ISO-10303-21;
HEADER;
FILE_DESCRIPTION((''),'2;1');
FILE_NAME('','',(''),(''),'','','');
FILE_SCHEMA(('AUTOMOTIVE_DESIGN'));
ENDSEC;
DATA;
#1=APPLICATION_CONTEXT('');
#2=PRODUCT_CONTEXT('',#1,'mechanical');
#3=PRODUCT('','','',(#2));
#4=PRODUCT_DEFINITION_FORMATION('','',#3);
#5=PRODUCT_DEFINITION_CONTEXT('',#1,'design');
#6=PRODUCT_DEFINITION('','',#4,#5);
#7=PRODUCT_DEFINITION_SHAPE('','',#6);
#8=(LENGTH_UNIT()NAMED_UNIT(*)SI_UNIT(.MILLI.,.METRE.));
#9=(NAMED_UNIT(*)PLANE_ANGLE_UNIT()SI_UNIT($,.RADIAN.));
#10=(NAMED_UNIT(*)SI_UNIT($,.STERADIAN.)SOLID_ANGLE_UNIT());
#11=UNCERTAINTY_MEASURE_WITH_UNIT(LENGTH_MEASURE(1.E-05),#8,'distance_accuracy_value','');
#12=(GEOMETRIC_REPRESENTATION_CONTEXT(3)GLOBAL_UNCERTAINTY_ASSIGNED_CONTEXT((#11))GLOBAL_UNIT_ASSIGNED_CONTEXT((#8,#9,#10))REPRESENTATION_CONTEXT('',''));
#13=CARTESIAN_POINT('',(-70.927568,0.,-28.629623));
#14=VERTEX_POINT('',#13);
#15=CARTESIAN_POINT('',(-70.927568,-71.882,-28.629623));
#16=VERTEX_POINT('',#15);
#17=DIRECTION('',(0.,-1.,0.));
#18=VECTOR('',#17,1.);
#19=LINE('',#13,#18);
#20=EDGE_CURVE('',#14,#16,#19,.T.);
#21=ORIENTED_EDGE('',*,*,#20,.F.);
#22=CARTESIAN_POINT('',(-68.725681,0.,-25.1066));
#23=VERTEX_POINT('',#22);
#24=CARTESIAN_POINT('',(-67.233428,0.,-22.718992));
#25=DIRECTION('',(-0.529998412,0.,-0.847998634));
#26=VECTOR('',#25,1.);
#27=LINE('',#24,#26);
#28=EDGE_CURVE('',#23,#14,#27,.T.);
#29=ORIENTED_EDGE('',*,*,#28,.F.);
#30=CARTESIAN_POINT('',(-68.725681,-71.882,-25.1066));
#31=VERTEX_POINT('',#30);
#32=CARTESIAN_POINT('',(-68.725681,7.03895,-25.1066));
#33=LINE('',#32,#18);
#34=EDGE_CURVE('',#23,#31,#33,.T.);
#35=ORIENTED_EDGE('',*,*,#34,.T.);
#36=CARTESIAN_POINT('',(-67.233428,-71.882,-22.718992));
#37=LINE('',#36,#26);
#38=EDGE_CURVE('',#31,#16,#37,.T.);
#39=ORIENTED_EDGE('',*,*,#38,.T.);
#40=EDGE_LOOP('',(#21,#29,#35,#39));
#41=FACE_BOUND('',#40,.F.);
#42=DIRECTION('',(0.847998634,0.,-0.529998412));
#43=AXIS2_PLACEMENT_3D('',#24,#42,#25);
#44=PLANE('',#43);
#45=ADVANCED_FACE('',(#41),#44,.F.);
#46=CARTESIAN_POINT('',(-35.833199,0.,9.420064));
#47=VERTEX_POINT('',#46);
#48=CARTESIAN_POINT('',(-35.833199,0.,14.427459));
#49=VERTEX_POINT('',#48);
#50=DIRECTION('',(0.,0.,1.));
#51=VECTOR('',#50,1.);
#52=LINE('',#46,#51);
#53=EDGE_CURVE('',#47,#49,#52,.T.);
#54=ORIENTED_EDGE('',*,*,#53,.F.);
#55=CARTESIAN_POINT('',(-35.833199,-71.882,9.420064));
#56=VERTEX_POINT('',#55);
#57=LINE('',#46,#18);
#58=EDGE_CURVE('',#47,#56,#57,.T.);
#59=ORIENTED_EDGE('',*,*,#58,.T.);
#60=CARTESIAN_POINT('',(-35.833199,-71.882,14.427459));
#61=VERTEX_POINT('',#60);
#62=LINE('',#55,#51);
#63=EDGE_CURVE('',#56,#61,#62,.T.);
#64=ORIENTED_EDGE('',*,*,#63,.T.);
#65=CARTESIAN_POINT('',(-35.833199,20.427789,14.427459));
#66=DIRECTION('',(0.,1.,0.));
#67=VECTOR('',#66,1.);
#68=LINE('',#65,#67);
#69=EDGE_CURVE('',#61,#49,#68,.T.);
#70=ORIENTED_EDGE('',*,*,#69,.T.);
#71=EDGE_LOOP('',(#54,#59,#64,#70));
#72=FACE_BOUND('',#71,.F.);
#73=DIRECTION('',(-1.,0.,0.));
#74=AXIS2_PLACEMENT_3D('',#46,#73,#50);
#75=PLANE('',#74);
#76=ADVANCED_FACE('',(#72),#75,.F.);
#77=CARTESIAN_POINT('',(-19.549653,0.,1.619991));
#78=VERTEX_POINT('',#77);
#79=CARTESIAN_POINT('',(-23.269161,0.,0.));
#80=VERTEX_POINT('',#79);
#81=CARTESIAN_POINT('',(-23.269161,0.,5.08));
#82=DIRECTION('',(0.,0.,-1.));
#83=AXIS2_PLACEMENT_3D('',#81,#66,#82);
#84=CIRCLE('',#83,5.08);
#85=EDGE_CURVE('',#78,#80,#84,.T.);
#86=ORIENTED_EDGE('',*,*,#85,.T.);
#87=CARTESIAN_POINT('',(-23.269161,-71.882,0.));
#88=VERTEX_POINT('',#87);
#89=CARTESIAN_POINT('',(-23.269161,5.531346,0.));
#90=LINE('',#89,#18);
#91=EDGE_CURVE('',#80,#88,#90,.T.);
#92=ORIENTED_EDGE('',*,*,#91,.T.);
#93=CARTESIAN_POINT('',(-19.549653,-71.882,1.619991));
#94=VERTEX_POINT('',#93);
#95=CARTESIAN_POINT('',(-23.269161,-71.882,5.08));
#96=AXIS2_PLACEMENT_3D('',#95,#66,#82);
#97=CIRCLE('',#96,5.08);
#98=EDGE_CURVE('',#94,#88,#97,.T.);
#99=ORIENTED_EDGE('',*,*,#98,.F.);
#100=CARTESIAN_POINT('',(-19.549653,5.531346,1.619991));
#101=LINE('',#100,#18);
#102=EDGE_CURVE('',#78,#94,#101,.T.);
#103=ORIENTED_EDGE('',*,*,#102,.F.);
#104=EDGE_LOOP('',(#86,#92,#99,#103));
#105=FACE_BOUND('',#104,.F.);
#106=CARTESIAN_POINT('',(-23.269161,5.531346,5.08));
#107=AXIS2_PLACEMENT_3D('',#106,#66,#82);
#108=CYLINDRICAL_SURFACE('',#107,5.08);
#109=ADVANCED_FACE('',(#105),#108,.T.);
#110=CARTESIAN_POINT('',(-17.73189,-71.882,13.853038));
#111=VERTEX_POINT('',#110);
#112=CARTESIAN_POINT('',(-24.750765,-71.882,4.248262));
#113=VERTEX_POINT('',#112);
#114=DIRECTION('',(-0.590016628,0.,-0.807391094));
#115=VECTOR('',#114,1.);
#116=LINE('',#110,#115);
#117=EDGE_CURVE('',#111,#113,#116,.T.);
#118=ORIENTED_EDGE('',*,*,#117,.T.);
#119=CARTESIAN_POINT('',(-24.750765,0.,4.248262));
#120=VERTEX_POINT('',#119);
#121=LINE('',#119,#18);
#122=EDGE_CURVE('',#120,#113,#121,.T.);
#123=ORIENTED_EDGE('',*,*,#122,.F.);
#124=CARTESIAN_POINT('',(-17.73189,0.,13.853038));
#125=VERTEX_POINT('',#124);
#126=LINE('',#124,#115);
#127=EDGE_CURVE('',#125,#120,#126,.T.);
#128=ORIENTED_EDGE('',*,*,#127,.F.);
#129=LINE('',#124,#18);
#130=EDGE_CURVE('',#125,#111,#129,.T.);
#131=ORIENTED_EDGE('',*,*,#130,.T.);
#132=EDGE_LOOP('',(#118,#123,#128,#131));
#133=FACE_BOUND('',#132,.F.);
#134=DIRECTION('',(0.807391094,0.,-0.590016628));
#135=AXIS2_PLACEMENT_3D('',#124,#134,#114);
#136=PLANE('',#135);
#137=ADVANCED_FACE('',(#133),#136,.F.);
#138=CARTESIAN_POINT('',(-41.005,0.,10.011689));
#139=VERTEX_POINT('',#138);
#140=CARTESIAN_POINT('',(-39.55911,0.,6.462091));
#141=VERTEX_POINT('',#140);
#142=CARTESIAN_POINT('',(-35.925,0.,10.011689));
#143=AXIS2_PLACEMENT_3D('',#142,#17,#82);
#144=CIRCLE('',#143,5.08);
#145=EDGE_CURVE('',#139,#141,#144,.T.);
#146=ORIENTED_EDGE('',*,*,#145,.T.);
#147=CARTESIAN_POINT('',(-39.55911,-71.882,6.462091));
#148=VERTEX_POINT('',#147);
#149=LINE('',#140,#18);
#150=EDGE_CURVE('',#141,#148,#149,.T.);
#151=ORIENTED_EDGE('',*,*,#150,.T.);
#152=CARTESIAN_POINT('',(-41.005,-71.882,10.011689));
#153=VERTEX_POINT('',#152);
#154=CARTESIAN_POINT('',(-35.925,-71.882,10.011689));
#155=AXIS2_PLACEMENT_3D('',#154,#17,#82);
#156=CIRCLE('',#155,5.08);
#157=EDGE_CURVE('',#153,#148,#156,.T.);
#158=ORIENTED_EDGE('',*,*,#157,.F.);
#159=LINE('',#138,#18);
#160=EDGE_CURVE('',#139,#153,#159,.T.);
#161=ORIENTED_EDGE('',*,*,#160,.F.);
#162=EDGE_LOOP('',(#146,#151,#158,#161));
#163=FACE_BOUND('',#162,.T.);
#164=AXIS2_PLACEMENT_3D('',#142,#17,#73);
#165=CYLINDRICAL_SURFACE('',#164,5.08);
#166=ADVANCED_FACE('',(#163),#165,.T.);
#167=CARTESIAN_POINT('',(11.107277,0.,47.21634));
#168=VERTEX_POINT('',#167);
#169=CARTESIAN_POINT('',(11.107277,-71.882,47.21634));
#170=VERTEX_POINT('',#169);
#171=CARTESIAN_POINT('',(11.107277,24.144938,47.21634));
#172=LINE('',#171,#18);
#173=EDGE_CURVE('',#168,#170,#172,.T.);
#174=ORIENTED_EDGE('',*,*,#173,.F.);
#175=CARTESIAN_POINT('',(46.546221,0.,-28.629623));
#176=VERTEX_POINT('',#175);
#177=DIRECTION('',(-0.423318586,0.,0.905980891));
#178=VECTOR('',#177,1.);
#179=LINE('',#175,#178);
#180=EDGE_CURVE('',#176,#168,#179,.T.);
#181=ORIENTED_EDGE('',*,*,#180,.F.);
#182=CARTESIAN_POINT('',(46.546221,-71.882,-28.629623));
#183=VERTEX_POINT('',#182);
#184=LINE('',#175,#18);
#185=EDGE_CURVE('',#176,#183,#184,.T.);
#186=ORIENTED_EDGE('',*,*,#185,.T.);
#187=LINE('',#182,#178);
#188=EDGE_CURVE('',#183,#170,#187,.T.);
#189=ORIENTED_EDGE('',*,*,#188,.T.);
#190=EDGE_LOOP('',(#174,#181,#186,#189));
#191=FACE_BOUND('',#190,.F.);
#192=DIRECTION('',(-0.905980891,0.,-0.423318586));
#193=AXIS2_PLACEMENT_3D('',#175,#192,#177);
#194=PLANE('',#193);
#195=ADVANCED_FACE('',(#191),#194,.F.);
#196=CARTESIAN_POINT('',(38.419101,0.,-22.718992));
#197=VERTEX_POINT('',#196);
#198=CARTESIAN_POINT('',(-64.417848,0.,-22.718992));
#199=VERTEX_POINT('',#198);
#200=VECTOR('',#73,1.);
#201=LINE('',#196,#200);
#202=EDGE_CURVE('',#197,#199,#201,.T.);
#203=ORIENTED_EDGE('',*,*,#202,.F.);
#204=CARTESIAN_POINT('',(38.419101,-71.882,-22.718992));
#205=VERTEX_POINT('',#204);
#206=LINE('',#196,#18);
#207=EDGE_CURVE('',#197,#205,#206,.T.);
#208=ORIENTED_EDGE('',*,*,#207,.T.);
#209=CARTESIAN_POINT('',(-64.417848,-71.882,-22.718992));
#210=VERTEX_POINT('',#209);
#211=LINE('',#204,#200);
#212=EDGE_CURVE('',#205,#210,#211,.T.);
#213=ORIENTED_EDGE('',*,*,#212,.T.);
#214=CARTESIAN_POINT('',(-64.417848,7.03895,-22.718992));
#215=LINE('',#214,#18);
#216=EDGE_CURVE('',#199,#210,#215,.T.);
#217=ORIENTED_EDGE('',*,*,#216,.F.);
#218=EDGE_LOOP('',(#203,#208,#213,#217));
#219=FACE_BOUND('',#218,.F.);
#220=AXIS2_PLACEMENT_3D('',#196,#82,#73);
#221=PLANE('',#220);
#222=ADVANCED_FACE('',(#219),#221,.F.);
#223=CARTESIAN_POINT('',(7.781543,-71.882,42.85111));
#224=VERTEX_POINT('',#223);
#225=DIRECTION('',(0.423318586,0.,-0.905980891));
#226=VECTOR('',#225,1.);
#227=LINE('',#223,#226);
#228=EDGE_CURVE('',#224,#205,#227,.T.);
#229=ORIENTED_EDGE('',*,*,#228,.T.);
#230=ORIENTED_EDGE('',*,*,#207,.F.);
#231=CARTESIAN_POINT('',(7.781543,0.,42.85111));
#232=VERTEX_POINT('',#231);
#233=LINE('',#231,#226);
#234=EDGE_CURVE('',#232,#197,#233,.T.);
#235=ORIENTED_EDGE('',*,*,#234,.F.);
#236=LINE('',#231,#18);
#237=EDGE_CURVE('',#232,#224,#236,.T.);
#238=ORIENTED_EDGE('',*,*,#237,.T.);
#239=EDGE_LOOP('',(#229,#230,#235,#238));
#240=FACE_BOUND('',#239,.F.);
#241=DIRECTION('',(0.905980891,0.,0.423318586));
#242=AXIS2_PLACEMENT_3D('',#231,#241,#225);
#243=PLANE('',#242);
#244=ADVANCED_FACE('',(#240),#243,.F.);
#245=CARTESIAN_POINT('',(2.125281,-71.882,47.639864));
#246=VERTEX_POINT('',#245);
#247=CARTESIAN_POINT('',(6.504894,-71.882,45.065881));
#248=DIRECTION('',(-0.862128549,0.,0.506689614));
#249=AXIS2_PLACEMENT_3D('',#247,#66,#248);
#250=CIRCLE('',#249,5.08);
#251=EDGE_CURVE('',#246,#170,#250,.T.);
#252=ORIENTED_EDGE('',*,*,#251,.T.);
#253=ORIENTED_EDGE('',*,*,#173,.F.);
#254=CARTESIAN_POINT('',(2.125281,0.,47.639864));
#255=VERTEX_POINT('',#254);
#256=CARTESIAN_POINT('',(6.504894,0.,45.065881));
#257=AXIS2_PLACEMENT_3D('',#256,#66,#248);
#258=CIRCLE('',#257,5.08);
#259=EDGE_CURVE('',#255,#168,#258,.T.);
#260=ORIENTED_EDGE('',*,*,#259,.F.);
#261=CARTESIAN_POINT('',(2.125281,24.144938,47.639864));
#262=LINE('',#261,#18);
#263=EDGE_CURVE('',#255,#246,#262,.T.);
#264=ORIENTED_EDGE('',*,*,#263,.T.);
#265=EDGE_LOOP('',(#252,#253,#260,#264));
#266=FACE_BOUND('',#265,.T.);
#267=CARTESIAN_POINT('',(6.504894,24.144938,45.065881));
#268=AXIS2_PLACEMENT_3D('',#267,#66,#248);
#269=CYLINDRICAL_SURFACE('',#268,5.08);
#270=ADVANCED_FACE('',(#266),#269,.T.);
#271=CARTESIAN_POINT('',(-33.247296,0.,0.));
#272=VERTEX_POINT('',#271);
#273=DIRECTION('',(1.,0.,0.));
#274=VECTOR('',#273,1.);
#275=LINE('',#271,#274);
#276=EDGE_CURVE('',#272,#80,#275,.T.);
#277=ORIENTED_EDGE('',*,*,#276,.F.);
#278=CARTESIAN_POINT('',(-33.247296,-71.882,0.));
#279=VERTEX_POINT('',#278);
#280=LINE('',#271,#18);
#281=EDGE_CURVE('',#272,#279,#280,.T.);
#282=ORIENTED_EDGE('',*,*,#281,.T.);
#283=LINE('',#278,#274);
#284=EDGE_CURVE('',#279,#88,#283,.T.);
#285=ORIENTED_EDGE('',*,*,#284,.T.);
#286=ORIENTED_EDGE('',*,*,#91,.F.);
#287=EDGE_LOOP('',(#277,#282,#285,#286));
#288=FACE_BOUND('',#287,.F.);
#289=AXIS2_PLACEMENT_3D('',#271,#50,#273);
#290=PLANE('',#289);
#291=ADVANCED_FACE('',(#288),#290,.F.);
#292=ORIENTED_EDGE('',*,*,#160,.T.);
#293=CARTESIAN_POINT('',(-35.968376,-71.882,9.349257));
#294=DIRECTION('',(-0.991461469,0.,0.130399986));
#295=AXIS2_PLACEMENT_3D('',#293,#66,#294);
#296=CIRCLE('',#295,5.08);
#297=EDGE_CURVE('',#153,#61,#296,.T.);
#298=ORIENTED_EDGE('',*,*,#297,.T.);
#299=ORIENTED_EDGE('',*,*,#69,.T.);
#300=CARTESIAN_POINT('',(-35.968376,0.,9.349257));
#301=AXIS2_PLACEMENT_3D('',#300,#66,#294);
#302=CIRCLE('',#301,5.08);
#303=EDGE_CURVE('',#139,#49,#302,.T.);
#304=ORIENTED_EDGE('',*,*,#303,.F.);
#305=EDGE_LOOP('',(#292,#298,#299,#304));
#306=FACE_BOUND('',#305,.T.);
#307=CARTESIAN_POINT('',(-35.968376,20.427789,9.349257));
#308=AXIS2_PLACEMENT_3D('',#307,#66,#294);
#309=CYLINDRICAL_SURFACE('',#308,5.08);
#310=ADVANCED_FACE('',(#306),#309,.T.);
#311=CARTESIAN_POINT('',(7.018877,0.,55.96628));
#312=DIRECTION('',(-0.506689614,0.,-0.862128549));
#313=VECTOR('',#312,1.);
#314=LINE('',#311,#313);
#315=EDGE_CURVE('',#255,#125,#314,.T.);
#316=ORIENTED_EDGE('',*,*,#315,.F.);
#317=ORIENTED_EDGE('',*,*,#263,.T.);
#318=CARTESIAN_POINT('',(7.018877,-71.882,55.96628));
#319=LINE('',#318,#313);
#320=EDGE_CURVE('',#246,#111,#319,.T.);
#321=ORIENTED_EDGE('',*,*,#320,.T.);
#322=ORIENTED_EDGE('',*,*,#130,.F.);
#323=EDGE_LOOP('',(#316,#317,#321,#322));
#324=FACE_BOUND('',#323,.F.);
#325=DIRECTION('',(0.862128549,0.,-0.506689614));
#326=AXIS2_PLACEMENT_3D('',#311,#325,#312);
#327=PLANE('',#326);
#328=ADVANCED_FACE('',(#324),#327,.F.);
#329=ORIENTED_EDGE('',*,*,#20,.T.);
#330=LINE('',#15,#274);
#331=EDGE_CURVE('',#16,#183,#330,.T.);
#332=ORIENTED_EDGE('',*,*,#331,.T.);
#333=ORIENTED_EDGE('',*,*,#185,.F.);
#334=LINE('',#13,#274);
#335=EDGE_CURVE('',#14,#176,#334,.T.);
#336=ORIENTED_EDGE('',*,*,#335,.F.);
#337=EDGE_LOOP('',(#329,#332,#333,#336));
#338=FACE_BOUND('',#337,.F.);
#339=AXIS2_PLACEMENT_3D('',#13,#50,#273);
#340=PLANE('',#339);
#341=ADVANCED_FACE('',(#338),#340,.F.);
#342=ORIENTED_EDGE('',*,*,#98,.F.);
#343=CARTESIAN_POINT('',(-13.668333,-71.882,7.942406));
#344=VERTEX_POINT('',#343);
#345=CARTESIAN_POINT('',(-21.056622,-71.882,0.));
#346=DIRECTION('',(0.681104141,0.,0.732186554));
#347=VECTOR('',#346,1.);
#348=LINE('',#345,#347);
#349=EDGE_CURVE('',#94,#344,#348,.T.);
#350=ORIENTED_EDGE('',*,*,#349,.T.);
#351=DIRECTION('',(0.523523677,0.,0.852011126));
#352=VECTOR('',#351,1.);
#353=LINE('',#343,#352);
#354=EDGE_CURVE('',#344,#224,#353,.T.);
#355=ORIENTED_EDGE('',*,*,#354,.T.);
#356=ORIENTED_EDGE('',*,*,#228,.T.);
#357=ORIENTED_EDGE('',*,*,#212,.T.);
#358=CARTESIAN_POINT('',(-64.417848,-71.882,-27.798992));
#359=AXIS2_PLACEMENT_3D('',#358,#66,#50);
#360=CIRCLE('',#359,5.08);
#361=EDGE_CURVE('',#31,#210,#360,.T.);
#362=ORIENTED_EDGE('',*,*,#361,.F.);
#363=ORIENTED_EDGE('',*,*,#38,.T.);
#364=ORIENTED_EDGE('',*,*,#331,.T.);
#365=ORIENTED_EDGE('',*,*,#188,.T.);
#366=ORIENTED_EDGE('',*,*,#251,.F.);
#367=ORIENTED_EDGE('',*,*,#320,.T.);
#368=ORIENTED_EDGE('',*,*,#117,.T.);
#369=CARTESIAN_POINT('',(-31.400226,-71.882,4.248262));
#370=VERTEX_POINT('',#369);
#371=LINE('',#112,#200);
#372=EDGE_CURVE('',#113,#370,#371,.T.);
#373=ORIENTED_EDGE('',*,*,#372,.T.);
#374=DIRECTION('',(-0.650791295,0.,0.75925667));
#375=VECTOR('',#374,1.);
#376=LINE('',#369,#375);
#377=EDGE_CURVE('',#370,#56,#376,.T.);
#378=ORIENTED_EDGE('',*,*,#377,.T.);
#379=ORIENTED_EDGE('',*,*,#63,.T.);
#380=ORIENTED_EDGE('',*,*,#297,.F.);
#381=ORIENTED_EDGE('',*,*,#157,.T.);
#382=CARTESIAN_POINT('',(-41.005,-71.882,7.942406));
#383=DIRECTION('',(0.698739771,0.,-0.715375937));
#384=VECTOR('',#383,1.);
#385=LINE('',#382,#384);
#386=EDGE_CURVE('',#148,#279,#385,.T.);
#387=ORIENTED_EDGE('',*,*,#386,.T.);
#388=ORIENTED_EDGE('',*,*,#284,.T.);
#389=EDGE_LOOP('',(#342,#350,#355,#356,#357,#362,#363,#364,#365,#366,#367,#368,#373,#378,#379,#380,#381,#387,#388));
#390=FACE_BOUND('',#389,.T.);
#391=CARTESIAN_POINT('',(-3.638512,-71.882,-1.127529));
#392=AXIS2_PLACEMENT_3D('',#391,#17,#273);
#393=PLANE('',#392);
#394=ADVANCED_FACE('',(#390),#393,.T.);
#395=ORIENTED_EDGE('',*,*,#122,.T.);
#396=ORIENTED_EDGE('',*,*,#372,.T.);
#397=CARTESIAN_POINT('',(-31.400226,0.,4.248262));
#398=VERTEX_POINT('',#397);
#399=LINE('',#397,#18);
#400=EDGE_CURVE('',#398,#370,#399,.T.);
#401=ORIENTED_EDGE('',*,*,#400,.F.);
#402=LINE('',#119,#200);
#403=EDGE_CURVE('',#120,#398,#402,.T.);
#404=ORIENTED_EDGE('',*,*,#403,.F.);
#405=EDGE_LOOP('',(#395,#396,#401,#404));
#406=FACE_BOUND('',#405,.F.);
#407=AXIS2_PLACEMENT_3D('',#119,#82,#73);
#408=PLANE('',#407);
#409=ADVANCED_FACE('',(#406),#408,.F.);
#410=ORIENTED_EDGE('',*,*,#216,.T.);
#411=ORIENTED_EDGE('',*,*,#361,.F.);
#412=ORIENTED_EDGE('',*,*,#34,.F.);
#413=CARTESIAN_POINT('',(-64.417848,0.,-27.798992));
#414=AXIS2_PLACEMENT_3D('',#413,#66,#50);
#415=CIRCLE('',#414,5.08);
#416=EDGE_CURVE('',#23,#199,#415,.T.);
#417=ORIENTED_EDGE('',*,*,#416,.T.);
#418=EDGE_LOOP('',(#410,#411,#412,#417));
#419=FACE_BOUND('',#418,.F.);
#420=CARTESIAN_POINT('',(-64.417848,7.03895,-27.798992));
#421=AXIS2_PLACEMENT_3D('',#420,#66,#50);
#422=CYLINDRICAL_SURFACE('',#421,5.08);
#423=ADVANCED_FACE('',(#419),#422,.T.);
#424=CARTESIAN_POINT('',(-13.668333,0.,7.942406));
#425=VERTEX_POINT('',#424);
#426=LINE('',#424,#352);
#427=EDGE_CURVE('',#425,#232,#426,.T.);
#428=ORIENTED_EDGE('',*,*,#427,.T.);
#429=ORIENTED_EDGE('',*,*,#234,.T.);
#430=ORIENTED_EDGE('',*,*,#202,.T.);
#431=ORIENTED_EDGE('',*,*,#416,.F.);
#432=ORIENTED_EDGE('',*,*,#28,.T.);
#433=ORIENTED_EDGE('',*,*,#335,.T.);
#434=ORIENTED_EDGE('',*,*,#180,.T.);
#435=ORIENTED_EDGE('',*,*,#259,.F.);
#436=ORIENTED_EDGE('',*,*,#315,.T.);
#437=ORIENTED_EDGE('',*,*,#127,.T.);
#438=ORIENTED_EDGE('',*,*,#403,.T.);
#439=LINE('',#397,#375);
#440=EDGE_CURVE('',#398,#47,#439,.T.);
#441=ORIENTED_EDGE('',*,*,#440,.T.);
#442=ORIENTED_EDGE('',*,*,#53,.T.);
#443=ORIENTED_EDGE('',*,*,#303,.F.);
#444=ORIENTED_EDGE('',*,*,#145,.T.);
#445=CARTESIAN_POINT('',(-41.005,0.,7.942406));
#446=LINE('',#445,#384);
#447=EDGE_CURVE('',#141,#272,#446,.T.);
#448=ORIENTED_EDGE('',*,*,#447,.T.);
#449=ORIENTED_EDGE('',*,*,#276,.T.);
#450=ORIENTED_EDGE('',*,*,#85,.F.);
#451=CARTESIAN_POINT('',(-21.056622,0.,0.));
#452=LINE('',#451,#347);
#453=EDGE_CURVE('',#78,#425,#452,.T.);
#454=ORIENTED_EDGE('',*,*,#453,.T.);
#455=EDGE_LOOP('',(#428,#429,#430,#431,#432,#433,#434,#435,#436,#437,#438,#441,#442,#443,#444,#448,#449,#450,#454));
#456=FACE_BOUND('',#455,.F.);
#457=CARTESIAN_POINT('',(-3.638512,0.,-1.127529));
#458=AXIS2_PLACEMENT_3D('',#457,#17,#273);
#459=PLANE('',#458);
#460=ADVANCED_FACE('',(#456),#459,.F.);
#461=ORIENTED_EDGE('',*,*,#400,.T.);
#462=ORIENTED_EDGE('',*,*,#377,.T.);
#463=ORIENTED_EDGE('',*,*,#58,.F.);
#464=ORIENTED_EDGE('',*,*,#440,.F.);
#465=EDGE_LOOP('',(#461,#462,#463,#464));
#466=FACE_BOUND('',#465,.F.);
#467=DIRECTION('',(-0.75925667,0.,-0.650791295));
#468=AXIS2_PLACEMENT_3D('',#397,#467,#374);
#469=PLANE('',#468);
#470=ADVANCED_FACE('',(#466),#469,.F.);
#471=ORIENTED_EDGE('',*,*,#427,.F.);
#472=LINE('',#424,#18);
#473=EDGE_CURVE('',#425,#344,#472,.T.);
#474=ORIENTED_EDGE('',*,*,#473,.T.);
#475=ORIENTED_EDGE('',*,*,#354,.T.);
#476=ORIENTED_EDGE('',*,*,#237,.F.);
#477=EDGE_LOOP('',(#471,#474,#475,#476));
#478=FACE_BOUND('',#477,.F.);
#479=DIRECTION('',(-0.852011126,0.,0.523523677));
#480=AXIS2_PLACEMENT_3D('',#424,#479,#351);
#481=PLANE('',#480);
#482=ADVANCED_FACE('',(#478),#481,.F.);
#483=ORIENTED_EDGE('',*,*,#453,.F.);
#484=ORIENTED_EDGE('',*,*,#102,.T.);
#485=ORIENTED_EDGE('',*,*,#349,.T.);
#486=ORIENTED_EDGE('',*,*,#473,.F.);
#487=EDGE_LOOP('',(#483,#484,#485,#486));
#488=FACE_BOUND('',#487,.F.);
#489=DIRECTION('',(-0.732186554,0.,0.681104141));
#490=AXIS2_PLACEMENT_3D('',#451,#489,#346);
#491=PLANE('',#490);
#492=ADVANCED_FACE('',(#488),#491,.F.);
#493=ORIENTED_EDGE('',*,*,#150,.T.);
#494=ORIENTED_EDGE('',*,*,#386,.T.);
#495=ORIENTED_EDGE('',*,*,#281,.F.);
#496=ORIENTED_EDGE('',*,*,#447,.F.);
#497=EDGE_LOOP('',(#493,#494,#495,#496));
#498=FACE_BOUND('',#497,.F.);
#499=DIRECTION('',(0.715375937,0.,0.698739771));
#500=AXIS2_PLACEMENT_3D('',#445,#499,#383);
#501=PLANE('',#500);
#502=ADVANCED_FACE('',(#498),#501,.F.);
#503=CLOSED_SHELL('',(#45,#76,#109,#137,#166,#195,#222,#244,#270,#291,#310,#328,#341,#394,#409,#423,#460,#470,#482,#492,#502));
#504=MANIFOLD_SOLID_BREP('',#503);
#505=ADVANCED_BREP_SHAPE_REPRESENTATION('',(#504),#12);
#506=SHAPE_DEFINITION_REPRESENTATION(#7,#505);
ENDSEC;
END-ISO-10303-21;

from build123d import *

# Parameters (mm, degrees)
F1_DEPTH    = 71.882
F2_R        = 5.08
F3_T1_DEPTH = 112.7375789557
F3_T3_DEPTH = 85.95990044
F3_T5_DEPTH = 120.1718750332
F3_T7_DEPTH = 82.9446926806


# Not quite as in the source:
# - a fillet or chamfer that OpenCascade refuses, or shapes differently, is made with other operations: its cross-section is extruded or revolved along the edge and cut away or added


with BuildPart() as f1:
    # F0 (on Front) → F1 (new body)
    with BuildSketch(Plane.XZ):
        Polygon((-35.8331985772, 9.4200642779), (-35.8331985772, 14.96128086), (-41.0050004721, 17.5471808761), (-41.0050004721, 7.9424064606), (-33.2472957671, 0), (-21.0566222668, 0), (-13.6683331802, 7.9424064606), (7.7815425405, 42.8511098702), (38.4191013873, -22.7189920843), (-67.233428359, -22.7189920843), (-70.92756778, -28.6296233535), (46.5462207794, -28.6296233535), (7.0188767277, 55.9662804008), (-17.7318900824, 13.8530377299), (-24.750765413, 4.2482619174), (-31.4002260566, 4.2482619174), align=None)
    extrude(amount=F1_DEPTH)

    # F2
    f2_edges = [f1.edges().sort_by_distance(p)[0] for p in [
        (-41.005, -35.941, 7.942406),
    ]]
    fillet(f2_edges, radius=F2_R)

    # F3: fillet of radius 5.08 on 4 edges, made by hand

    # F3_s2 → F3_t1 (cut)
    with BuildSketch(Plane.XZ.offset(-20.4277894779)):
        with BuildLine():
            ThreePointArc((-41.0050004721, 10.0116893284), (-38.3510310012, 13.8358325022), (-33.6965318012, 13.8929478568))
            Line((-33.6965318012, 13.8929478568), (-41.0050004721, 17.5471808761))
            Line((-41.0050004721, 17.5471808761), (-41.0050004721, 10.0116893284))
        make_face()
    extrude(amount=F3_T1_DEPTH, mode=Mode.SUBTRACT)

    # F3_s4 → F3_t3 (cut)
    with BuildSketch(Plane.XZ.offset(-7.03895022)):
        with BuildLine():
            ThreePointArc((-64.417848271, -22.7189920843), (-66.8804738001, -23.3558090469), (-68.7256813332, -25.1066001536))
            Line((-68.7256813332, -25.1066001536), (-67.233428359, -22.7189920843))
            Line((-67.233428359, -22.7189920843), (-64.417848271, -22.7189920843))
        make_face()
    extrude(amount=F3_T3_DEPTH, mode=Mode.SUBTRACT)

    # F3_s6 → F3_t5 (cut)
    with BuildSketch(Plane.XZ.offset(-24.1449375166)):
        with BuildLine():
            ThreePointArc((2.1252810988, 47.6398644221), (6.7441636939, 50.1402432188), (11.1072770532, 47.2163396005))
            Line((11.1072770532, 47.2163396005), (7.0188767277, 55.9662804008))
            Line((7.0188767277, 55.9662804008), (2.1252810988, 47.6398644221))
        make_face()
    extrude(amount=F3_T5_DEPTH, mode=Mode.SUBTRACT)

    # F3_s8 → F3_t7 (cut)
    with BuildSketch(Plane.XZ.offset(-5.5313463403)):
        with BuildLine():
            ThreePointArc((-23.2691608029, 0), (-21.2406694782, 0.4225733558), (-19.5496531088, 1.6199909663))
            Line((-19.5496531088, 1.6199909663), (-21.0566222668, 0))
            Line((-21.0566222668, 0), (-23.2691608029, 0))
        make_face()
    extrude(amount=F3_T7_DEPTH, mode=Mode.SUBTRACT)


solid = f1.part
